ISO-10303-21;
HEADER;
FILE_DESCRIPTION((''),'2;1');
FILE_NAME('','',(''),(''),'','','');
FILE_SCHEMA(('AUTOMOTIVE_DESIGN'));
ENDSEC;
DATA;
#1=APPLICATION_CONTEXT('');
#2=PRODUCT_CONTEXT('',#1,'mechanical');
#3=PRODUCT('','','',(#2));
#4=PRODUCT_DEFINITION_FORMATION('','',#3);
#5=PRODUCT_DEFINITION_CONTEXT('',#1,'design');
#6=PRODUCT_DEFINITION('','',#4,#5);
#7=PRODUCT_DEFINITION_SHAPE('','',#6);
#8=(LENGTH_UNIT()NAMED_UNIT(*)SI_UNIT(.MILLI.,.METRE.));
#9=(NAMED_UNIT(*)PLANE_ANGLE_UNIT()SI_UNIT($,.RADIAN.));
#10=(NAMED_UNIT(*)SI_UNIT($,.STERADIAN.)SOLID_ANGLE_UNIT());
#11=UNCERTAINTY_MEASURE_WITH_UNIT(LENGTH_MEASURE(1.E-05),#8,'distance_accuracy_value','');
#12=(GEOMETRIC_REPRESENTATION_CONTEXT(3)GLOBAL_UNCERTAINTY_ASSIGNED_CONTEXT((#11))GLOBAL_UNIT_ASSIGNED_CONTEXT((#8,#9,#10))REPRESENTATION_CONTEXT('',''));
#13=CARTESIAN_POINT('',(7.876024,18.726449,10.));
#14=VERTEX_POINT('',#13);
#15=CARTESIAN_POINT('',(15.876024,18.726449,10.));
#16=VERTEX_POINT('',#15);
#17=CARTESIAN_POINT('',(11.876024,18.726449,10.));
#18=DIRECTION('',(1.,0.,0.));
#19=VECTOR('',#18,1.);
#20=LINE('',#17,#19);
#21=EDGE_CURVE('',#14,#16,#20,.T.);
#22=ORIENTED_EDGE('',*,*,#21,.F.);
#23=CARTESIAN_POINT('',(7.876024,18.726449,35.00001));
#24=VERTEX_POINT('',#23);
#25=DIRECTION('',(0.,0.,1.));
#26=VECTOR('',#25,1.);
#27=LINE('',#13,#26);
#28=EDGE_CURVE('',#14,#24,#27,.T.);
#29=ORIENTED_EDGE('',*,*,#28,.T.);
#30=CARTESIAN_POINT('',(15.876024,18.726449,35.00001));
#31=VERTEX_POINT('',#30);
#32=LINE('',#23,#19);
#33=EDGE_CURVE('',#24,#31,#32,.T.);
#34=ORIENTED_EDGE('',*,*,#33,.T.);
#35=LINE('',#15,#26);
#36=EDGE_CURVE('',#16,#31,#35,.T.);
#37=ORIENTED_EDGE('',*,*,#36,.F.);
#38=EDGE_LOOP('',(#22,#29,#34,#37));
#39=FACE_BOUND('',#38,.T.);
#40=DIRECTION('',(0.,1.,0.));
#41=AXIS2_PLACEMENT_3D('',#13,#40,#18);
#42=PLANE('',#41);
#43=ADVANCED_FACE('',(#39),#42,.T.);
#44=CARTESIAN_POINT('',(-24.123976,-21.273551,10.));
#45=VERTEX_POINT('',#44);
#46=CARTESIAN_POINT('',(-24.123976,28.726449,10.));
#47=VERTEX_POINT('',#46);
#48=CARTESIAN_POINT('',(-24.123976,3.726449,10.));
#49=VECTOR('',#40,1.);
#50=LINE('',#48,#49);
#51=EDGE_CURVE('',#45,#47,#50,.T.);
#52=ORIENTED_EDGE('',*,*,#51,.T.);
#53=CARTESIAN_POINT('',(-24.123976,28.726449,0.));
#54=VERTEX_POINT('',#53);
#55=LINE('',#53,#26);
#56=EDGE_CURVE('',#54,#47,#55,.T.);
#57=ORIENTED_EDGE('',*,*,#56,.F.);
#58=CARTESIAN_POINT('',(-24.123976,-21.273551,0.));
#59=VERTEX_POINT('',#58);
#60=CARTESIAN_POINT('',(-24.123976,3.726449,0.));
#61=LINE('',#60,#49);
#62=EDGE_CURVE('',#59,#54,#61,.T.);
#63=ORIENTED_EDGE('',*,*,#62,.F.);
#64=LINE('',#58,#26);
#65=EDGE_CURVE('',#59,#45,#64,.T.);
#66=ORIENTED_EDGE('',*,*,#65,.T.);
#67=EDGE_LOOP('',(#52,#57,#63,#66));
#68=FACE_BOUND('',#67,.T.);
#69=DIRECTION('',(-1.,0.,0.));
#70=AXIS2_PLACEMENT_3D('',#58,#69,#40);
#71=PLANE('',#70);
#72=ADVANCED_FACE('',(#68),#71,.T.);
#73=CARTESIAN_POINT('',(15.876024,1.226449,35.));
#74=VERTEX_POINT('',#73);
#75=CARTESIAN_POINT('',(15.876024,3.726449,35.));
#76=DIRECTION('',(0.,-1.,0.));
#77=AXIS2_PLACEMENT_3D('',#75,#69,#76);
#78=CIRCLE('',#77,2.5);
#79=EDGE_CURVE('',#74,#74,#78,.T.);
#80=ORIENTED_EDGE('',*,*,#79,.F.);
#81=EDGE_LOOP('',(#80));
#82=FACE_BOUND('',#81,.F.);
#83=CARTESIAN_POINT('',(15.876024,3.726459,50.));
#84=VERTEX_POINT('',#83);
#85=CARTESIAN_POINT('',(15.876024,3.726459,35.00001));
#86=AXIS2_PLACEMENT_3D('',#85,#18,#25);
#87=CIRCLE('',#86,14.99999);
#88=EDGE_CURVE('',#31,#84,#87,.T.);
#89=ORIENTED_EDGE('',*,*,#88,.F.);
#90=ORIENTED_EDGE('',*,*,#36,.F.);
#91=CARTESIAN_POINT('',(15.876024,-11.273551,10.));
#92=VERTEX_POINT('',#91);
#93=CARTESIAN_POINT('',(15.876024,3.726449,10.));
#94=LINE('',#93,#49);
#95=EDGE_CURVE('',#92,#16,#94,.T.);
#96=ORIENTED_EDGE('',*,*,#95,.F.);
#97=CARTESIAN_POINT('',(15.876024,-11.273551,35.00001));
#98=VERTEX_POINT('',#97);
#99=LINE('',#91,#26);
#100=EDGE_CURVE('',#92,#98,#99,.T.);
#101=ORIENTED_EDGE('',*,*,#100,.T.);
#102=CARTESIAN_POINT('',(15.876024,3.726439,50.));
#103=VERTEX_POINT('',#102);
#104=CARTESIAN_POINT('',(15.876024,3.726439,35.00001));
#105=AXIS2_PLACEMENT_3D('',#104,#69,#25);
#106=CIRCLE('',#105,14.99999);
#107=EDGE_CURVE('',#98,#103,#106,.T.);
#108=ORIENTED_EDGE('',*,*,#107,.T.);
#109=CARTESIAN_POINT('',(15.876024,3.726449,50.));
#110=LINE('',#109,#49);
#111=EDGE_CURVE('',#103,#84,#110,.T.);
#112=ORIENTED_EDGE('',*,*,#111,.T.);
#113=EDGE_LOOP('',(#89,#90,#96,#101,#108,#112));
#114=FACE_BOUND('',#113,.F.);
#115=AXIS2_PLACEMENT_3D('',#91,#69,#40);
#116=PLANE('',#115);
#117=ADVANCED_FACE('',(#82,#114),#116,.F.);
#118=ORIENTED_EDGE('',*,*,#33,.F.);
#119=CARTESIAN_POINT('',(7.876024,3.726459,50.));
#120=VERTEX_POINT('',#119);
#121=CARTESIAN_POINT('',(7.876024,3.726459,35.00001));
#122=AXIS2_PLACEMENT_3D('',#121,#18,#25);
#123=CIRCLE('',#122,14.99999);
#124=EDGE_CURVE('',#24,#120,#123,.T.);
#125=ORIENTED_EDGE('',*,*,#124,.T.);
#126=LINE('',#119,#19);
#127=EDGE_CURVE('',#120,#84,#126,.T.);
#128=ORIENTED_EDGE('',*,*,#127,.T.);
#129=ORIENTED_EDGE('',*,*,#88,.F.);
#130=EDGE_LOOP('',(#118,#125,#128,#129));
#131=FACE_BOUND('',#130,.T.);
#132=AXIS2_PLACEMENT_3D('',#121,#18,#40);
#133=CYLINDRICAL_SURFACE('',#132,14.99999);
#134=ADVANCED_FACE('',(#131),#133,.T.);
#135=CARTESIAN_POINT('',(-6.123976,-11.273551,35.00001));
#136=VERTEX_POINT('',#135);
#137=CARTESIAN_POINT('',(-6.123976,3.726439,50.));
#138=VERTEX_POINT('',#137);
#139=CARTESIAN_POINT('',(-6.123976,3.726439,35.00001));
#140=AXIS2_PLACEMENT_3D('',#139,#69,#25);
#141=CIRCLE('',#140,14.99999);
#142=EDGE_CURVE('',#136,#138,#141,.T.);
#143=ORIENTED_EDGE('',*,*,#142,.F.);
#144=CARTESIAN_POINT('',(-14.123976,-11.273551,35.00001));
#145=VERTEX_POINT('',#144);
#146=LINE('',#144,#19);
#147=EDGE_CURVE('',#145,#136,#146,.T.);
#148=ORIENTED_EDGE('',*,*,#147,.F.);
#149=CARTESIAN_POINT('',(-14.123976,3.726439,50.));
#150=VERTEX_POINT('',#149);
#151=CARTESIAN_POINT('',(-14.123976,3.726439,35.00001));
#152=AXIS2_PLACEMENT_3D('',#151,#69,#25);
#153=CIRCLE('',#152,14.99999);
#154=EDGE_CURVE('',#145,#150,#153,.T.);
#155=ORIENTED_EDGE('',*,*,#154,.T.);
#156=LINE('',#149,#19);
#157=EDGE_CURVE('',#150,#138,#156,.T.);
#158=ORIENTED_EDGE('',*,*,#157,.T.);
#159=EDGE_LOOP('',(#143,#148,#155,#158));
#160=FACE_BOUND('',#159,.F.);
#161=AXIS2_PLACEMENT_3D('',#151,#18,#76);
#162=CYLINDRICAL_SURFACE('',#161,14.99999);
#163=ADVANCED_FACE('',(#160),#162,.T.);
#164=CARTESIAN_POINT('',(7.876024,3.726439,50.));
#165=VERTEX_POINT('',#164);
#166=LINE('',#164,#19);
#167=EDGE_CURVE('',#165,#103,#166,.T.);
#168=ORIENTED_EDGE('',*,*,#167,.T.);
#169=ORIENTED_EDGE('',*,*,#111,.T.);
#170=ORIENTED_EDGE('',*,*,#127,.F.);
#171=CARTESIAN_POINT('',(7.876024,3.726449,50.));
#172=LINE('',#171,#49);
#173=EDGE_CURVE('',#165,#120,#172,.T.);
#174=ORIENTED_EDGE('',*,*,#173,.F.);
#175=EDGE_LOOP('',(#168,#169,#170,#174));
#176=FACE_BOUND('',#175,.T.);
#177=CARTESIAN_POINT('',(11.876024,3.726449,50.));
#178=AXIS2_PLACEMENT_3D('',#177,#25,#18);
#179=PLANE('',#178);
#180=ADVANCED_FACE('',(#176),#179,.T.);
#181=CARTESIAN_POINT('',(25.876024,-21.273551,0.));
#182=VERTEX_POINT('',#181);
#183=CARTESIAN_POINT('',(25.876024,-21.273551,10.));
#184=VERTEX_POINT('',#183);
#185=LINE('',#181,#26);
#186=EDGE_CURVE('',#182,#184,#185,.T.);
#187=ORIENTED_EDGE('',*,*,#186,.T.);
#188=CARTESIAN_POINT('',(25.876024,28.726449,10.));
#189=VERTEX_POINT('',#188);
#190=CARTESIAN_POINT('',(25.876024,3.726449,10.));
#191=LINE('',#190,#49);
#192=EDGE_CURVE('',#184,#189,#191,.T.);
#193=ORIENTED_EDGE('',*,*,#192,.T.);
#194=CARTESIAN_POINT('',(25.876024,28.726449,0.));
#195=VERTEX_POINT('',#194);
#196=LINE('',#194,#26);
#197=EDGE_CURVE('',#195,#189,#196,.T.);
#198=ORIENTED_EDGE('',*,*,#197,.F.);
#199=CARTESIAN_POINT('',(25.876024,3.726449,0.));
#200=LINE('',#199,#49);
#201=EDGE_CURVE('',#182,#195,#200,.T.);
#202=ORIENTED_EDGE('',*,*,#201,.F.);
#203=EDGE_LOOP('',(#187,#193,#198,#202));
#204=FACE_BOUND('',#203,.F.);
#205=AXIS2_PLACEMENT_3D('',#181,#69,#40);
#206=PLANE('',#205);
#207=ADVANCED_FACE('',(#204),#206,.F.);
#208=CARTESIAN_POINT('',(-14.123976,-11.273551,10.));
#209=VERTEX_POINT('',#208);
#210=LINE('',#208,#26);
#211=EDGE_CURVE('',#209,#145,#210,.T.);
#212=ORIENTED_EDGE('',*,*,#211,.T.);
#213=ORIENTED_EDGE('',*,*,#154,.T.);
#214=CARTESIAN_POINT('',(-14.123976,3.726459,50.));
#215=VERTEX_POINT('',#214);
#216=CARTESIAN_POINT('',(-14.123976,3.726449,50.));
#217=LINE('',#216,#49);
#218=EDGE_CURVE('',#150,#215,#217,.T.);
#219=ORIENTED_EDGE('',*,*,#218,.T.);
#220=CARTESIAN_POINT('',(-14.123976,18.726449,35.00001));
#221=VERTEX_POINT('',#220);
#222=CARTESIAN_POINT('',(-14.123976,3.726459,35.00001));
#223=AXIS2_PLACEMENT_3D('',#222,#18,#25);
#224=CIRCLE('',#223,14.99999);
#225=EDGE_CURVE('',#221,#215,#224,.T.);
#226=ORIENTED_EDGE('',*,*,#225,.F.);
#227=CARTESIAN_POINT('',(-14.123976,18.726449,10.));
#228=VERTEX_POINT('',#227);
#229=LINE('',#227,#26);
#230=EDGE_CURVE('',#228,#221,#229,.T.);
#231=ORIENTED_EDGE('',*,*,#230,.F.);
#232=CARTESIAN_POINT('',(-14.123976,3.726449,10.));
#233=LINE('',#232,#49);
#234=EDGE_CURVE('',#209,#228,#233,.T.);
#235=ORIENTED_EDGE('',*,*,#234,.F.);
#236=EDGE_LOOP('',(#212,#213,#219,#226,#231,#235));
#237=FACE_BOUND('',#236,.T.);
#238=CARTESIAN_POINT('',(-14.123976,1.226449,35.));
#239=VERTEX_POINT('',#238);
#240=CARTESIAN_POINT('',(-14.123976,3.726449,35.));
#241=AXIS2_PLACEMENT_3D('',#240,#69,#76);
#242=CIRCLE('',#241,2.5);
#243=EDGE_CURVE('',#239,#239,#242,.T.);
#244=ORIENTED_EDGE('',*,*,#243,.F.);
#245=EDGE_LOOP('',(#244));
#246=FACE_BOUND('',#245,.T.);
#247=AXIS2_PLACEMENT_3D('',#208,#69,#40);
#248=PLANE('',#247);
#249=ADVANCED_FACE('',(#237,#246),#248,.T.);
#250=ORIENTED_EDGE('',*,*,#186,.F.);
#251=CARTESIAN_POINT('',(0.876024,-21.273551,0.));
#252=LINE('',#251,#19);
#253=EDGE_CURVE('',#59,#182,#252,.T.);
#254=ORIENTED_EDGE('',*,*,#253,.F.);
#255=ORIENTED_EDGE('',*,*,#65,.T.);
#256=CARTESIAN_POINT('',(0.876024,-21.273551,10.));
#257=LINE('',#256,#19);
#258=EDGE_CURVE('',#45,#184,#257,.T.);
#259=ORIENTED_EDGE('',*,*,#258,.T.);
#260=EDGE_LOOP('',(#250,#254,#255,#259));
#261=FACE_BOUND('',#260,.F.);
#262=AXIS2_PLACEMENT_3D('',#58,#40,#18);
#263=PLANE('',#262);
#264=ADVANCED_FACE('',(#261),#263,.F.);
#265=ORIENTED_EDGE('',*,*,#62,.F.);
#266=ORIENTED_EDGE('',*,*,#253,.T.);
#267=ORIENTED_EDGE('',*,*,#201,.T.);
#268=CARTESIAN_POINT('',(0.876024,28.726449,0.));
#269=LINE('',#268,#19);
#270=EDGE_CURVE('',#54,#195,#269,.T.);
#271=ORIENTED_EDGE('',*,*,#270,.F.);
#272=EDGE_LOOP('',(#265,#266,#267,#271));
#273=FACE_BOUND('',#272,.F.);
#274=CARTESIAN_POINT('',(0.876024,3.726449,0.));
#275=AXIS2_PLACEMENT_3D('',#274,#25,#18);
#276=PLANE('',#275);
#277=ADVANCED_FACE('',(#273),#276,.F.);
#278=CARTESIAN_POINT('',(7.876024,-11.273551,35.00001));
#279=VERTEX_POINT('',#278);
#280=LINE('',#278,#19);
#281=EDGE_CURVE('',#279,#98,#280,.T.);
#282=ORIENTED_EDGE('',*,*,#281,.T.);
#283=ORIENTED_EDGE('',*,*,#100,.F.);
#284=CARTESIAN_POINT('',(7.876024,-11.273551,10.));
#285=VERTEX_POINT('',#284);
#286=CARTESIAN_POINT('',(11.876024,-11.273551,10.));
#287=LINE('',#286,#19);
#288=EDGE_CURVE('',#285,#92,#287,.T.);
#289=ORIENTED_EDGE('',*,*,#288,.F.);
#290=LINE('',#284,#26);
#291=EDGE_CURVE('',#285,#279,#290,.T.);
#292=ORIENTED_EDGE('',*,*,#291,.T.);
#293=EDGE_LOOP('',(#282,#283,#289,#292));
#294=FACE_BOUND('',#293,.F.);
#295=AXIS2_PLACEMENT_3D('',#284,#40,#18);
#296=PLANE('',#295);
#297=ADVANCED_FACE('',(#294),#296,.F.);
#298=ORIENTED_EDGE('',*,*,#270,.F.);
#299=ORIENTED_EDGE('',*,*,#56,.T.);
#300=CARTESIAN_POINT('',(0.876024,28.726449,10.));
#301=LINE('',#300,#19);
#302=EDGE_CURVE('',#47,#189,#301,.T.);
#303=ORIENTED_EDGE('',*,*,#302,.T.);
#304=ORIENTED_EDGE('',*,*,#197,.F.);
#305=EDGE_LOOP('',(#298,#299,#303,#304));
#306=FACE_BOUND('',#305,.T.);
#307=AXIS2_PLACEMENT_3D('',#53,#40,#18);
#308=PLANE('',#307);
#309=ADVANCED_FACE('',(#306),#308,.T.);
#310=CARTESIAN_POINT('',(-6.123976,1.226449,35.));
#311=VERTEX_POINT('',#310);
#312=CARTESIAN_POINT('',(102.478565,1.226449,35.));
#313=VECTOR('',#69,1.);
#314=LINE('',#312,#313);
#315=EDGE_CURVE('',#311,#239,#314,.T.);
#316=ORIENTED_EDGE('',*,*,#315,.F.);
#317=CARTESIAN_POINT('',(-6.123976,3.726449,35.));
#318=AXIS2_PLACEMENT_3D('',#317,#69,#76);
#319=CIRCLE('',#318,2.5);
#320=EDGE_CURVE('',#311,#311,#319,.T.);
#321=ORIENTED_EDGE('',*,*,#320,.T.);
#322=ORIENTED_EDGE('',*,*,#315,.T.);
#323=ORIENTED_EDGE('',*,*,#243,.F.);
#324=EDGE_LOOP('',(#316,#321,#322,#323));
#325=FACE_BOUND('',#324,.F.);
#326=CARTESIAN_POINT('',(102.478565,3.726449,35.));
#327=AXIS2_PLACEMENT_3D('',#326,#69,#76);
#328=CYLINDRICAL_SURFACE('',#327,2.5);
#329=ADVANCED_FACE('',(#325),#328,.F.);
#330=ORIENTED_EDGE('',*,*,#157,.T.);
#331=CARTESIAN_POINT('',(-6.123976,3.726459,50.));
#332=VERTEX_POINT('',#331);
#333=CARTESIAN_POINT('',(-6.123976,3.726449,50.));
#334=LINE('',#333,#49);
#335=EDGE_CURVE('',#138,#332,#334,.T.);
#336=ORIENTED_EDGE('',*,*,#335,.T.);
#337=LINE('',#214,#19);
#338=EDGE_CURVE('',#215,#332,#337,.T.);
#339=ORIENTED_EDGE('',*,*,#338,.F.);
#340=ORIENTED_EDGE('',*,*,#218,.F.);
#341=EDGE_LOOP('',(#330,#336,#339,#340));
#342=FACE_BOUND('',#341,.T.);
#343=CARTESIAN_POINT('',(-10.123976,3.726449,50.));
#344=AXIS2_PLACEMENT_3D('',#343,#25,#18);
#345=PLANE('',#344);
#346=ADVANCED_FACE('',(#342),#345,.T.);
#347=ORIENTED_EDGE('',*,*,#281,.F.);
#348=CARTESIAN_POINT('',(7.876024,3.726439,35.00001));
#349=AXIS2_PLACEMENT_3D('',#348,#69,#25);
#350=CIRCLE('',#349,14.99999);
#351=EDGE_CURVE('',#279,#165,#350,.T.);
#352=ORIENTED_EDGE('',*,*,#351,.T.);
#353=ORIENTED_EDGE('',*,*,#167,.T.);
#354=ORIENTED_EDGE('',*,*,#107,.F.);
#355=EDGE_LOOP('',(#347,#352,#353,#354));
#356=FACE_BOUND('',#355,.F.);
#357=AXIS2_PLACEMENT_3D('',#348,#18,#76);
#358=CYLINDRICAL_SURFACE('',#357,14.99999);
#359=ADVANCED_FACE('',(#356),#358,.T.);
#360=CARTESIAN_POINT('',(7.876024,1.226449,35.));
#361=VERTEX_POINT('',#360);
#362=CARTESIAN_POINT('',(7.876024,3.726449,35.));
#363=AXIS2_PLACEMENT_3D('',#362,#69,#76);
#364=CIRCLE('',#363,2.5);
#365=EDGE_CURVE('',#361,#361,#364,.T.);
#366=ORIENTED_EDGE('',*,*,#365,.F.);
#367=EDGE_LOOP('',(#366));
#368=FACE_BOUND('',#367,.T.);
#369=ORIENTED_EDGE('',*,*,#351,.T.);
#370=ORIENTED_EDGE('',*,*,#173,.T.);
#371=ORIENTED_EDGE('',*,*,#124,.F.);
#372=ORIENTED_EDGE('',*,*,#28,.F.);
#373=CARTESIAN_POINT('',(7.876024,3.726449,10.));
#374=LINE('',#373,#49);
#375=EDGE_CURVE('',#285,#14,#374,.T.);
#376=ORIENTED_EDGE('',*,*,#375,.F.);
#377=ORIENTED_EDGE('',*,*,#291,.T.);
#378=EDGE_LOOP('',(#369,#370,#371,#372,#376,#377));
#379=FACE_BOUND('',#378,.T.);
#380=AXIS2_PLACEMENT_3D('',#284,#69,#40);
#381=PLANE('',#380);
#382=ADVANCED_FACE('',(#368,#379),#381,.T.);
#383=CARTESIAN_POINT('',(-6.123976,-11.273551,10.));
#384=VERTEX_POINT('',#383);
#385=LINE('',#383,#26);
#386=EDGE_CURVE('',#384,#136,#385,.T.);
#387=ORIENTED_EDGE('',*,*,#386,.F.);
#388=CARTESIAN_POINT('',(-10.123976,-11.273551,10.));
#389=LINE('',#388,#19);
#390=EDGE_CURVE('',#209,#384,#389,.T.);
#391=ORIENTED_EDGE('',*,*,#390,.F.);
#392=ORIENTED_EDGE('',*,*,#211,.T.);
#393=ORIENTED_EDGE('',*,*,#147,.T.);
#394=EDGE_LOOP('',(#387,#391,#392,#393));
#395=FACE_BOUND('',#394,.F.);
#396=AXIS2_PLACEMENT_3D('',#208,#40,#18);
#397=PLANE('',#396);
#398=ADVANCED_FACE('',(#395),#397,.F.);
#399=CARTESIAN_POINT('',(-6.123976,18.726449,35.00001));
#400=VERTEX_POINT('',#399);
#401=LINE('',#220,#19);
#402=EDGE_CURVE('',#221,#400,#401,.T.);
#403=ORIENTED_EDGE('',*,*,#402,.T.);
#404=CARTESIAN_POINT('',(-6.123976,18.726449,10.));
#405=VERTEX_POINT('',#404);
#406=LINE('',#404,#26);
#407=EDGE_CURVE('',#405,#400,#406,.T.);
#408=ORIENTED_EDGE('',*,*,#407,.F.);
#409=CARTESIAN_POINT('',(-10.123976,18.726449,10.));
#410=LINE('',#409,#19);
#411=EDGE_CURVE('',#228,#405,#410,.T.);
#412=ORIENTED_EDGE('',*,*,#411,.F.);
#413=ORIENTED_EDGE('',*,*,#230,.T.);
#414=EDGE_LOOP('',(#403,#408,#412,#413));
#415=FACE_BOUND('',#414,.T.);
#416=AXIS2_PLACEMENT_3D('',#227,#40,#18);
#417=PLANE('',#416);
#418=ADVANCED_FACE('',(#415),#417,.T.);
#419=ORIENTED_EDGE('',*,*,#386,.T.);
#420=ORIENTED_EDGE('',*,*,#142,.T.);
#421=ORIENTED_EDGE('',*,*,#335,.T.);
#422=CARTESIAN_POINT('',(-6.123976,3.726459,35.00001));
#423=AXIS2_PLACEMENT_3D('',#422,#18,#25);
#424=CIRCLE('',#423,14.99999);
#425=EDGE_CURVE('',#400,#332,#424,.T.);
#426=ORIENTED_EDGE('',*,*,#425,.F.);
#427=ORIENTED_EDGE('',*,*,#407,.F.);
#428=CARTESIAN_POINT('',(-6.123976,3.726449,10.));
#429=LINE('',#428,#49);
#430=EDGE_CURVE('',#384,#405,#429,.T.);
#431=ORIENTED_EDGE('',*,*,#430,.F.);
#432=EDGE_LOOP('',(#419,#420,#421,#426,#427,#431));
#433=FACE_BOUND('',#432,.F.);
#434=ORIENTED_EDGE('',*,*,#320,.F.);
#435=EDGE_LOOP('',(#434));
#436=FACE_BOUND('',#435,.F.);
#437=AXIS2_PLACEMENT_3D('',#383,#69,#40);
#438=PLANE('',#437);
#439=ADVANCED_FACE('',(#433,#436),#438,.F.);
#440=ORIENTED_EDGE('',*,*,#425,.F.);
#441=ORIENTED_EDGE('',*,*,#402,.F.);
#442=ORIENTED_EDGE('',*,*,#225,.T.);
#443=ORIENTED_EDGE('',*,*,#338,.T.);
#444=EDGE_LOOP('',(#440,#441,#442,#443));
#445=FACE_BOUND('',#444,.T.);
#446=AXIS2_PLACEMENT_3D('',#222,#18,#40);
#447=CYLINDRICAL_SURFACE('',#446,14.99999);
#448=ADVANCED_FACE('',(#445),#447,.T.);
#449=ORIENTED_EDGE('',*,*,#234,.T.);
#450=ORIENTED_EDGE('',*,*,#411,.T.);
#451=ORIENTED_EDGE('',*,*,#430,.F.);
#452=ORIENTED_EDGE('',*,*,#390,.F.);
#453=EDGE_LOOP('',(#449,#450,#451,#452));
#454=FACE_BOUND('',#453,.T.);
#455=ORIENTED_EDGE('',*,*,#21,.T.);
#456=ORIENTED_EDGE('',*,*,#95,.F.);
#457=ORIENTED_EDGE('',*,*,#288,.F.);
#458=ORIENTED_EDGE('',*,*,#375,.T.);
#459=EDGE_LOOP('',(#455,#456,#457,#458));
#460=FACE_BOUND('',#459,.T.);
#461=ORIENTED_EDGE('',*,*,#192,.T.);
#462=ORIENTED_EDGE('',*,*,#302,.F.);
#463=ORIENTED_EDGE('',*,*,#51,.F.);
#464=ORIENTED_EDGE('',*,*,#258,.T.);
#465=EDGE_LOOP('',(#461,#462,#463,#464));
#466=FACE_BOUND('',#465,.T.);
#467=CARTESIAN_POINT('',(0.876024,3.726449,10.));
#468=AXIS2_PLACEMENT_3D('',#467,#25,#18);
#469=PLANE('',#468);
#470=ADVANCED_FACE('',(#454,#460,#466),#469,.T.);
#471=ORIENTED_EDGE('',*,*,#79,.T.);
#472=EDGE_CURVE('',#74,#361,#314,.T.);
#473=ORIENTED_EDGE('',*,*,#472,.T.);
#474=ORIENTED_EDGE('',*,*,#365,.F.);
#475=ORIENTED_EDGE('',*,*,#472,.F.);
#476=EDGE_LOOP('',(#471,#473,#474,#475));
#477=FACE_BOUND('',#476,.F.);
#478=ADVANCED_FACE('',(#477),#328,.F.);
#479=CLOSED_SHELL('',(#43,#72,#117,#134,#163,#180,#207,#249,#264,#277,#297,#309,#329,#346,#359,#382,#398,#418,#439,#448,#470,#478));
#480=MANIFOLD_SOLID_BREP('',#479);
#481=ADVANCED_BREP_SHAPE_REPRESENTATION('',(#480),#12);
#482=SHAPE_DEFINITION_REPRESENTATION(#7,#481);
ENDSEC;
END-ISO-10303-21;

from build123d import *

# Parameters (mm, degrees)
F0_W     = 50
F0_H     = 50
F1_DEPTH = 10
F2_W     = 8
F2_H     = 30
F3_DEPTH = 40
F4_R     = 14.99999
F6_D     = 5


# Not quite as in the source:
# - a fillet or chamfer is up to 0.001 mm smaller than in the source, because OpenCascade refuses the exact size


with BuildPart() as f1:
    # F0 (on Top) → F1 (new body)
    with BuildSketch(Plane.XY):
        with Locations((0.8760243654, 3.7264487195)):
            Rectangle(F0_W, F0_H)
    extrude(amount=F1_DEPTH)

    # F2 (on face) → F3 (join)
    with BuildSketch(Plane.XY.offset(10)):
        with Locations((11.8760243654, 3.7264487195)):
            Rectangle(F2_W, F2_H)
        with Locations((-10.1239756346, 3.7264487195)):
            Rectangle(F2_W, F2_H)
    extrude(amount=F3_DEPTH)

    # F4 (radius 15 in the source; OpenCascade refuses exactly that, so slightly less here)
    f4_edges = [f1.edges().sort_by_distance(p)[0] for p in [
        (-10.123976, -11.273551, 50),
        (11.876024, -11.273551, 50),
        (11.876024, 18.726449, 50),
        (-10.123976, 18.726449, 50),
    ]]
    fillet(f4_edges, radius=F4_R)

    # F6 (through all)
    with Locations(Plane.YZ.offset(15.8760243654)):
        with Locations((3.7264487195, 35)):
            Hole(F6_D / 2)


solid = f1.part
